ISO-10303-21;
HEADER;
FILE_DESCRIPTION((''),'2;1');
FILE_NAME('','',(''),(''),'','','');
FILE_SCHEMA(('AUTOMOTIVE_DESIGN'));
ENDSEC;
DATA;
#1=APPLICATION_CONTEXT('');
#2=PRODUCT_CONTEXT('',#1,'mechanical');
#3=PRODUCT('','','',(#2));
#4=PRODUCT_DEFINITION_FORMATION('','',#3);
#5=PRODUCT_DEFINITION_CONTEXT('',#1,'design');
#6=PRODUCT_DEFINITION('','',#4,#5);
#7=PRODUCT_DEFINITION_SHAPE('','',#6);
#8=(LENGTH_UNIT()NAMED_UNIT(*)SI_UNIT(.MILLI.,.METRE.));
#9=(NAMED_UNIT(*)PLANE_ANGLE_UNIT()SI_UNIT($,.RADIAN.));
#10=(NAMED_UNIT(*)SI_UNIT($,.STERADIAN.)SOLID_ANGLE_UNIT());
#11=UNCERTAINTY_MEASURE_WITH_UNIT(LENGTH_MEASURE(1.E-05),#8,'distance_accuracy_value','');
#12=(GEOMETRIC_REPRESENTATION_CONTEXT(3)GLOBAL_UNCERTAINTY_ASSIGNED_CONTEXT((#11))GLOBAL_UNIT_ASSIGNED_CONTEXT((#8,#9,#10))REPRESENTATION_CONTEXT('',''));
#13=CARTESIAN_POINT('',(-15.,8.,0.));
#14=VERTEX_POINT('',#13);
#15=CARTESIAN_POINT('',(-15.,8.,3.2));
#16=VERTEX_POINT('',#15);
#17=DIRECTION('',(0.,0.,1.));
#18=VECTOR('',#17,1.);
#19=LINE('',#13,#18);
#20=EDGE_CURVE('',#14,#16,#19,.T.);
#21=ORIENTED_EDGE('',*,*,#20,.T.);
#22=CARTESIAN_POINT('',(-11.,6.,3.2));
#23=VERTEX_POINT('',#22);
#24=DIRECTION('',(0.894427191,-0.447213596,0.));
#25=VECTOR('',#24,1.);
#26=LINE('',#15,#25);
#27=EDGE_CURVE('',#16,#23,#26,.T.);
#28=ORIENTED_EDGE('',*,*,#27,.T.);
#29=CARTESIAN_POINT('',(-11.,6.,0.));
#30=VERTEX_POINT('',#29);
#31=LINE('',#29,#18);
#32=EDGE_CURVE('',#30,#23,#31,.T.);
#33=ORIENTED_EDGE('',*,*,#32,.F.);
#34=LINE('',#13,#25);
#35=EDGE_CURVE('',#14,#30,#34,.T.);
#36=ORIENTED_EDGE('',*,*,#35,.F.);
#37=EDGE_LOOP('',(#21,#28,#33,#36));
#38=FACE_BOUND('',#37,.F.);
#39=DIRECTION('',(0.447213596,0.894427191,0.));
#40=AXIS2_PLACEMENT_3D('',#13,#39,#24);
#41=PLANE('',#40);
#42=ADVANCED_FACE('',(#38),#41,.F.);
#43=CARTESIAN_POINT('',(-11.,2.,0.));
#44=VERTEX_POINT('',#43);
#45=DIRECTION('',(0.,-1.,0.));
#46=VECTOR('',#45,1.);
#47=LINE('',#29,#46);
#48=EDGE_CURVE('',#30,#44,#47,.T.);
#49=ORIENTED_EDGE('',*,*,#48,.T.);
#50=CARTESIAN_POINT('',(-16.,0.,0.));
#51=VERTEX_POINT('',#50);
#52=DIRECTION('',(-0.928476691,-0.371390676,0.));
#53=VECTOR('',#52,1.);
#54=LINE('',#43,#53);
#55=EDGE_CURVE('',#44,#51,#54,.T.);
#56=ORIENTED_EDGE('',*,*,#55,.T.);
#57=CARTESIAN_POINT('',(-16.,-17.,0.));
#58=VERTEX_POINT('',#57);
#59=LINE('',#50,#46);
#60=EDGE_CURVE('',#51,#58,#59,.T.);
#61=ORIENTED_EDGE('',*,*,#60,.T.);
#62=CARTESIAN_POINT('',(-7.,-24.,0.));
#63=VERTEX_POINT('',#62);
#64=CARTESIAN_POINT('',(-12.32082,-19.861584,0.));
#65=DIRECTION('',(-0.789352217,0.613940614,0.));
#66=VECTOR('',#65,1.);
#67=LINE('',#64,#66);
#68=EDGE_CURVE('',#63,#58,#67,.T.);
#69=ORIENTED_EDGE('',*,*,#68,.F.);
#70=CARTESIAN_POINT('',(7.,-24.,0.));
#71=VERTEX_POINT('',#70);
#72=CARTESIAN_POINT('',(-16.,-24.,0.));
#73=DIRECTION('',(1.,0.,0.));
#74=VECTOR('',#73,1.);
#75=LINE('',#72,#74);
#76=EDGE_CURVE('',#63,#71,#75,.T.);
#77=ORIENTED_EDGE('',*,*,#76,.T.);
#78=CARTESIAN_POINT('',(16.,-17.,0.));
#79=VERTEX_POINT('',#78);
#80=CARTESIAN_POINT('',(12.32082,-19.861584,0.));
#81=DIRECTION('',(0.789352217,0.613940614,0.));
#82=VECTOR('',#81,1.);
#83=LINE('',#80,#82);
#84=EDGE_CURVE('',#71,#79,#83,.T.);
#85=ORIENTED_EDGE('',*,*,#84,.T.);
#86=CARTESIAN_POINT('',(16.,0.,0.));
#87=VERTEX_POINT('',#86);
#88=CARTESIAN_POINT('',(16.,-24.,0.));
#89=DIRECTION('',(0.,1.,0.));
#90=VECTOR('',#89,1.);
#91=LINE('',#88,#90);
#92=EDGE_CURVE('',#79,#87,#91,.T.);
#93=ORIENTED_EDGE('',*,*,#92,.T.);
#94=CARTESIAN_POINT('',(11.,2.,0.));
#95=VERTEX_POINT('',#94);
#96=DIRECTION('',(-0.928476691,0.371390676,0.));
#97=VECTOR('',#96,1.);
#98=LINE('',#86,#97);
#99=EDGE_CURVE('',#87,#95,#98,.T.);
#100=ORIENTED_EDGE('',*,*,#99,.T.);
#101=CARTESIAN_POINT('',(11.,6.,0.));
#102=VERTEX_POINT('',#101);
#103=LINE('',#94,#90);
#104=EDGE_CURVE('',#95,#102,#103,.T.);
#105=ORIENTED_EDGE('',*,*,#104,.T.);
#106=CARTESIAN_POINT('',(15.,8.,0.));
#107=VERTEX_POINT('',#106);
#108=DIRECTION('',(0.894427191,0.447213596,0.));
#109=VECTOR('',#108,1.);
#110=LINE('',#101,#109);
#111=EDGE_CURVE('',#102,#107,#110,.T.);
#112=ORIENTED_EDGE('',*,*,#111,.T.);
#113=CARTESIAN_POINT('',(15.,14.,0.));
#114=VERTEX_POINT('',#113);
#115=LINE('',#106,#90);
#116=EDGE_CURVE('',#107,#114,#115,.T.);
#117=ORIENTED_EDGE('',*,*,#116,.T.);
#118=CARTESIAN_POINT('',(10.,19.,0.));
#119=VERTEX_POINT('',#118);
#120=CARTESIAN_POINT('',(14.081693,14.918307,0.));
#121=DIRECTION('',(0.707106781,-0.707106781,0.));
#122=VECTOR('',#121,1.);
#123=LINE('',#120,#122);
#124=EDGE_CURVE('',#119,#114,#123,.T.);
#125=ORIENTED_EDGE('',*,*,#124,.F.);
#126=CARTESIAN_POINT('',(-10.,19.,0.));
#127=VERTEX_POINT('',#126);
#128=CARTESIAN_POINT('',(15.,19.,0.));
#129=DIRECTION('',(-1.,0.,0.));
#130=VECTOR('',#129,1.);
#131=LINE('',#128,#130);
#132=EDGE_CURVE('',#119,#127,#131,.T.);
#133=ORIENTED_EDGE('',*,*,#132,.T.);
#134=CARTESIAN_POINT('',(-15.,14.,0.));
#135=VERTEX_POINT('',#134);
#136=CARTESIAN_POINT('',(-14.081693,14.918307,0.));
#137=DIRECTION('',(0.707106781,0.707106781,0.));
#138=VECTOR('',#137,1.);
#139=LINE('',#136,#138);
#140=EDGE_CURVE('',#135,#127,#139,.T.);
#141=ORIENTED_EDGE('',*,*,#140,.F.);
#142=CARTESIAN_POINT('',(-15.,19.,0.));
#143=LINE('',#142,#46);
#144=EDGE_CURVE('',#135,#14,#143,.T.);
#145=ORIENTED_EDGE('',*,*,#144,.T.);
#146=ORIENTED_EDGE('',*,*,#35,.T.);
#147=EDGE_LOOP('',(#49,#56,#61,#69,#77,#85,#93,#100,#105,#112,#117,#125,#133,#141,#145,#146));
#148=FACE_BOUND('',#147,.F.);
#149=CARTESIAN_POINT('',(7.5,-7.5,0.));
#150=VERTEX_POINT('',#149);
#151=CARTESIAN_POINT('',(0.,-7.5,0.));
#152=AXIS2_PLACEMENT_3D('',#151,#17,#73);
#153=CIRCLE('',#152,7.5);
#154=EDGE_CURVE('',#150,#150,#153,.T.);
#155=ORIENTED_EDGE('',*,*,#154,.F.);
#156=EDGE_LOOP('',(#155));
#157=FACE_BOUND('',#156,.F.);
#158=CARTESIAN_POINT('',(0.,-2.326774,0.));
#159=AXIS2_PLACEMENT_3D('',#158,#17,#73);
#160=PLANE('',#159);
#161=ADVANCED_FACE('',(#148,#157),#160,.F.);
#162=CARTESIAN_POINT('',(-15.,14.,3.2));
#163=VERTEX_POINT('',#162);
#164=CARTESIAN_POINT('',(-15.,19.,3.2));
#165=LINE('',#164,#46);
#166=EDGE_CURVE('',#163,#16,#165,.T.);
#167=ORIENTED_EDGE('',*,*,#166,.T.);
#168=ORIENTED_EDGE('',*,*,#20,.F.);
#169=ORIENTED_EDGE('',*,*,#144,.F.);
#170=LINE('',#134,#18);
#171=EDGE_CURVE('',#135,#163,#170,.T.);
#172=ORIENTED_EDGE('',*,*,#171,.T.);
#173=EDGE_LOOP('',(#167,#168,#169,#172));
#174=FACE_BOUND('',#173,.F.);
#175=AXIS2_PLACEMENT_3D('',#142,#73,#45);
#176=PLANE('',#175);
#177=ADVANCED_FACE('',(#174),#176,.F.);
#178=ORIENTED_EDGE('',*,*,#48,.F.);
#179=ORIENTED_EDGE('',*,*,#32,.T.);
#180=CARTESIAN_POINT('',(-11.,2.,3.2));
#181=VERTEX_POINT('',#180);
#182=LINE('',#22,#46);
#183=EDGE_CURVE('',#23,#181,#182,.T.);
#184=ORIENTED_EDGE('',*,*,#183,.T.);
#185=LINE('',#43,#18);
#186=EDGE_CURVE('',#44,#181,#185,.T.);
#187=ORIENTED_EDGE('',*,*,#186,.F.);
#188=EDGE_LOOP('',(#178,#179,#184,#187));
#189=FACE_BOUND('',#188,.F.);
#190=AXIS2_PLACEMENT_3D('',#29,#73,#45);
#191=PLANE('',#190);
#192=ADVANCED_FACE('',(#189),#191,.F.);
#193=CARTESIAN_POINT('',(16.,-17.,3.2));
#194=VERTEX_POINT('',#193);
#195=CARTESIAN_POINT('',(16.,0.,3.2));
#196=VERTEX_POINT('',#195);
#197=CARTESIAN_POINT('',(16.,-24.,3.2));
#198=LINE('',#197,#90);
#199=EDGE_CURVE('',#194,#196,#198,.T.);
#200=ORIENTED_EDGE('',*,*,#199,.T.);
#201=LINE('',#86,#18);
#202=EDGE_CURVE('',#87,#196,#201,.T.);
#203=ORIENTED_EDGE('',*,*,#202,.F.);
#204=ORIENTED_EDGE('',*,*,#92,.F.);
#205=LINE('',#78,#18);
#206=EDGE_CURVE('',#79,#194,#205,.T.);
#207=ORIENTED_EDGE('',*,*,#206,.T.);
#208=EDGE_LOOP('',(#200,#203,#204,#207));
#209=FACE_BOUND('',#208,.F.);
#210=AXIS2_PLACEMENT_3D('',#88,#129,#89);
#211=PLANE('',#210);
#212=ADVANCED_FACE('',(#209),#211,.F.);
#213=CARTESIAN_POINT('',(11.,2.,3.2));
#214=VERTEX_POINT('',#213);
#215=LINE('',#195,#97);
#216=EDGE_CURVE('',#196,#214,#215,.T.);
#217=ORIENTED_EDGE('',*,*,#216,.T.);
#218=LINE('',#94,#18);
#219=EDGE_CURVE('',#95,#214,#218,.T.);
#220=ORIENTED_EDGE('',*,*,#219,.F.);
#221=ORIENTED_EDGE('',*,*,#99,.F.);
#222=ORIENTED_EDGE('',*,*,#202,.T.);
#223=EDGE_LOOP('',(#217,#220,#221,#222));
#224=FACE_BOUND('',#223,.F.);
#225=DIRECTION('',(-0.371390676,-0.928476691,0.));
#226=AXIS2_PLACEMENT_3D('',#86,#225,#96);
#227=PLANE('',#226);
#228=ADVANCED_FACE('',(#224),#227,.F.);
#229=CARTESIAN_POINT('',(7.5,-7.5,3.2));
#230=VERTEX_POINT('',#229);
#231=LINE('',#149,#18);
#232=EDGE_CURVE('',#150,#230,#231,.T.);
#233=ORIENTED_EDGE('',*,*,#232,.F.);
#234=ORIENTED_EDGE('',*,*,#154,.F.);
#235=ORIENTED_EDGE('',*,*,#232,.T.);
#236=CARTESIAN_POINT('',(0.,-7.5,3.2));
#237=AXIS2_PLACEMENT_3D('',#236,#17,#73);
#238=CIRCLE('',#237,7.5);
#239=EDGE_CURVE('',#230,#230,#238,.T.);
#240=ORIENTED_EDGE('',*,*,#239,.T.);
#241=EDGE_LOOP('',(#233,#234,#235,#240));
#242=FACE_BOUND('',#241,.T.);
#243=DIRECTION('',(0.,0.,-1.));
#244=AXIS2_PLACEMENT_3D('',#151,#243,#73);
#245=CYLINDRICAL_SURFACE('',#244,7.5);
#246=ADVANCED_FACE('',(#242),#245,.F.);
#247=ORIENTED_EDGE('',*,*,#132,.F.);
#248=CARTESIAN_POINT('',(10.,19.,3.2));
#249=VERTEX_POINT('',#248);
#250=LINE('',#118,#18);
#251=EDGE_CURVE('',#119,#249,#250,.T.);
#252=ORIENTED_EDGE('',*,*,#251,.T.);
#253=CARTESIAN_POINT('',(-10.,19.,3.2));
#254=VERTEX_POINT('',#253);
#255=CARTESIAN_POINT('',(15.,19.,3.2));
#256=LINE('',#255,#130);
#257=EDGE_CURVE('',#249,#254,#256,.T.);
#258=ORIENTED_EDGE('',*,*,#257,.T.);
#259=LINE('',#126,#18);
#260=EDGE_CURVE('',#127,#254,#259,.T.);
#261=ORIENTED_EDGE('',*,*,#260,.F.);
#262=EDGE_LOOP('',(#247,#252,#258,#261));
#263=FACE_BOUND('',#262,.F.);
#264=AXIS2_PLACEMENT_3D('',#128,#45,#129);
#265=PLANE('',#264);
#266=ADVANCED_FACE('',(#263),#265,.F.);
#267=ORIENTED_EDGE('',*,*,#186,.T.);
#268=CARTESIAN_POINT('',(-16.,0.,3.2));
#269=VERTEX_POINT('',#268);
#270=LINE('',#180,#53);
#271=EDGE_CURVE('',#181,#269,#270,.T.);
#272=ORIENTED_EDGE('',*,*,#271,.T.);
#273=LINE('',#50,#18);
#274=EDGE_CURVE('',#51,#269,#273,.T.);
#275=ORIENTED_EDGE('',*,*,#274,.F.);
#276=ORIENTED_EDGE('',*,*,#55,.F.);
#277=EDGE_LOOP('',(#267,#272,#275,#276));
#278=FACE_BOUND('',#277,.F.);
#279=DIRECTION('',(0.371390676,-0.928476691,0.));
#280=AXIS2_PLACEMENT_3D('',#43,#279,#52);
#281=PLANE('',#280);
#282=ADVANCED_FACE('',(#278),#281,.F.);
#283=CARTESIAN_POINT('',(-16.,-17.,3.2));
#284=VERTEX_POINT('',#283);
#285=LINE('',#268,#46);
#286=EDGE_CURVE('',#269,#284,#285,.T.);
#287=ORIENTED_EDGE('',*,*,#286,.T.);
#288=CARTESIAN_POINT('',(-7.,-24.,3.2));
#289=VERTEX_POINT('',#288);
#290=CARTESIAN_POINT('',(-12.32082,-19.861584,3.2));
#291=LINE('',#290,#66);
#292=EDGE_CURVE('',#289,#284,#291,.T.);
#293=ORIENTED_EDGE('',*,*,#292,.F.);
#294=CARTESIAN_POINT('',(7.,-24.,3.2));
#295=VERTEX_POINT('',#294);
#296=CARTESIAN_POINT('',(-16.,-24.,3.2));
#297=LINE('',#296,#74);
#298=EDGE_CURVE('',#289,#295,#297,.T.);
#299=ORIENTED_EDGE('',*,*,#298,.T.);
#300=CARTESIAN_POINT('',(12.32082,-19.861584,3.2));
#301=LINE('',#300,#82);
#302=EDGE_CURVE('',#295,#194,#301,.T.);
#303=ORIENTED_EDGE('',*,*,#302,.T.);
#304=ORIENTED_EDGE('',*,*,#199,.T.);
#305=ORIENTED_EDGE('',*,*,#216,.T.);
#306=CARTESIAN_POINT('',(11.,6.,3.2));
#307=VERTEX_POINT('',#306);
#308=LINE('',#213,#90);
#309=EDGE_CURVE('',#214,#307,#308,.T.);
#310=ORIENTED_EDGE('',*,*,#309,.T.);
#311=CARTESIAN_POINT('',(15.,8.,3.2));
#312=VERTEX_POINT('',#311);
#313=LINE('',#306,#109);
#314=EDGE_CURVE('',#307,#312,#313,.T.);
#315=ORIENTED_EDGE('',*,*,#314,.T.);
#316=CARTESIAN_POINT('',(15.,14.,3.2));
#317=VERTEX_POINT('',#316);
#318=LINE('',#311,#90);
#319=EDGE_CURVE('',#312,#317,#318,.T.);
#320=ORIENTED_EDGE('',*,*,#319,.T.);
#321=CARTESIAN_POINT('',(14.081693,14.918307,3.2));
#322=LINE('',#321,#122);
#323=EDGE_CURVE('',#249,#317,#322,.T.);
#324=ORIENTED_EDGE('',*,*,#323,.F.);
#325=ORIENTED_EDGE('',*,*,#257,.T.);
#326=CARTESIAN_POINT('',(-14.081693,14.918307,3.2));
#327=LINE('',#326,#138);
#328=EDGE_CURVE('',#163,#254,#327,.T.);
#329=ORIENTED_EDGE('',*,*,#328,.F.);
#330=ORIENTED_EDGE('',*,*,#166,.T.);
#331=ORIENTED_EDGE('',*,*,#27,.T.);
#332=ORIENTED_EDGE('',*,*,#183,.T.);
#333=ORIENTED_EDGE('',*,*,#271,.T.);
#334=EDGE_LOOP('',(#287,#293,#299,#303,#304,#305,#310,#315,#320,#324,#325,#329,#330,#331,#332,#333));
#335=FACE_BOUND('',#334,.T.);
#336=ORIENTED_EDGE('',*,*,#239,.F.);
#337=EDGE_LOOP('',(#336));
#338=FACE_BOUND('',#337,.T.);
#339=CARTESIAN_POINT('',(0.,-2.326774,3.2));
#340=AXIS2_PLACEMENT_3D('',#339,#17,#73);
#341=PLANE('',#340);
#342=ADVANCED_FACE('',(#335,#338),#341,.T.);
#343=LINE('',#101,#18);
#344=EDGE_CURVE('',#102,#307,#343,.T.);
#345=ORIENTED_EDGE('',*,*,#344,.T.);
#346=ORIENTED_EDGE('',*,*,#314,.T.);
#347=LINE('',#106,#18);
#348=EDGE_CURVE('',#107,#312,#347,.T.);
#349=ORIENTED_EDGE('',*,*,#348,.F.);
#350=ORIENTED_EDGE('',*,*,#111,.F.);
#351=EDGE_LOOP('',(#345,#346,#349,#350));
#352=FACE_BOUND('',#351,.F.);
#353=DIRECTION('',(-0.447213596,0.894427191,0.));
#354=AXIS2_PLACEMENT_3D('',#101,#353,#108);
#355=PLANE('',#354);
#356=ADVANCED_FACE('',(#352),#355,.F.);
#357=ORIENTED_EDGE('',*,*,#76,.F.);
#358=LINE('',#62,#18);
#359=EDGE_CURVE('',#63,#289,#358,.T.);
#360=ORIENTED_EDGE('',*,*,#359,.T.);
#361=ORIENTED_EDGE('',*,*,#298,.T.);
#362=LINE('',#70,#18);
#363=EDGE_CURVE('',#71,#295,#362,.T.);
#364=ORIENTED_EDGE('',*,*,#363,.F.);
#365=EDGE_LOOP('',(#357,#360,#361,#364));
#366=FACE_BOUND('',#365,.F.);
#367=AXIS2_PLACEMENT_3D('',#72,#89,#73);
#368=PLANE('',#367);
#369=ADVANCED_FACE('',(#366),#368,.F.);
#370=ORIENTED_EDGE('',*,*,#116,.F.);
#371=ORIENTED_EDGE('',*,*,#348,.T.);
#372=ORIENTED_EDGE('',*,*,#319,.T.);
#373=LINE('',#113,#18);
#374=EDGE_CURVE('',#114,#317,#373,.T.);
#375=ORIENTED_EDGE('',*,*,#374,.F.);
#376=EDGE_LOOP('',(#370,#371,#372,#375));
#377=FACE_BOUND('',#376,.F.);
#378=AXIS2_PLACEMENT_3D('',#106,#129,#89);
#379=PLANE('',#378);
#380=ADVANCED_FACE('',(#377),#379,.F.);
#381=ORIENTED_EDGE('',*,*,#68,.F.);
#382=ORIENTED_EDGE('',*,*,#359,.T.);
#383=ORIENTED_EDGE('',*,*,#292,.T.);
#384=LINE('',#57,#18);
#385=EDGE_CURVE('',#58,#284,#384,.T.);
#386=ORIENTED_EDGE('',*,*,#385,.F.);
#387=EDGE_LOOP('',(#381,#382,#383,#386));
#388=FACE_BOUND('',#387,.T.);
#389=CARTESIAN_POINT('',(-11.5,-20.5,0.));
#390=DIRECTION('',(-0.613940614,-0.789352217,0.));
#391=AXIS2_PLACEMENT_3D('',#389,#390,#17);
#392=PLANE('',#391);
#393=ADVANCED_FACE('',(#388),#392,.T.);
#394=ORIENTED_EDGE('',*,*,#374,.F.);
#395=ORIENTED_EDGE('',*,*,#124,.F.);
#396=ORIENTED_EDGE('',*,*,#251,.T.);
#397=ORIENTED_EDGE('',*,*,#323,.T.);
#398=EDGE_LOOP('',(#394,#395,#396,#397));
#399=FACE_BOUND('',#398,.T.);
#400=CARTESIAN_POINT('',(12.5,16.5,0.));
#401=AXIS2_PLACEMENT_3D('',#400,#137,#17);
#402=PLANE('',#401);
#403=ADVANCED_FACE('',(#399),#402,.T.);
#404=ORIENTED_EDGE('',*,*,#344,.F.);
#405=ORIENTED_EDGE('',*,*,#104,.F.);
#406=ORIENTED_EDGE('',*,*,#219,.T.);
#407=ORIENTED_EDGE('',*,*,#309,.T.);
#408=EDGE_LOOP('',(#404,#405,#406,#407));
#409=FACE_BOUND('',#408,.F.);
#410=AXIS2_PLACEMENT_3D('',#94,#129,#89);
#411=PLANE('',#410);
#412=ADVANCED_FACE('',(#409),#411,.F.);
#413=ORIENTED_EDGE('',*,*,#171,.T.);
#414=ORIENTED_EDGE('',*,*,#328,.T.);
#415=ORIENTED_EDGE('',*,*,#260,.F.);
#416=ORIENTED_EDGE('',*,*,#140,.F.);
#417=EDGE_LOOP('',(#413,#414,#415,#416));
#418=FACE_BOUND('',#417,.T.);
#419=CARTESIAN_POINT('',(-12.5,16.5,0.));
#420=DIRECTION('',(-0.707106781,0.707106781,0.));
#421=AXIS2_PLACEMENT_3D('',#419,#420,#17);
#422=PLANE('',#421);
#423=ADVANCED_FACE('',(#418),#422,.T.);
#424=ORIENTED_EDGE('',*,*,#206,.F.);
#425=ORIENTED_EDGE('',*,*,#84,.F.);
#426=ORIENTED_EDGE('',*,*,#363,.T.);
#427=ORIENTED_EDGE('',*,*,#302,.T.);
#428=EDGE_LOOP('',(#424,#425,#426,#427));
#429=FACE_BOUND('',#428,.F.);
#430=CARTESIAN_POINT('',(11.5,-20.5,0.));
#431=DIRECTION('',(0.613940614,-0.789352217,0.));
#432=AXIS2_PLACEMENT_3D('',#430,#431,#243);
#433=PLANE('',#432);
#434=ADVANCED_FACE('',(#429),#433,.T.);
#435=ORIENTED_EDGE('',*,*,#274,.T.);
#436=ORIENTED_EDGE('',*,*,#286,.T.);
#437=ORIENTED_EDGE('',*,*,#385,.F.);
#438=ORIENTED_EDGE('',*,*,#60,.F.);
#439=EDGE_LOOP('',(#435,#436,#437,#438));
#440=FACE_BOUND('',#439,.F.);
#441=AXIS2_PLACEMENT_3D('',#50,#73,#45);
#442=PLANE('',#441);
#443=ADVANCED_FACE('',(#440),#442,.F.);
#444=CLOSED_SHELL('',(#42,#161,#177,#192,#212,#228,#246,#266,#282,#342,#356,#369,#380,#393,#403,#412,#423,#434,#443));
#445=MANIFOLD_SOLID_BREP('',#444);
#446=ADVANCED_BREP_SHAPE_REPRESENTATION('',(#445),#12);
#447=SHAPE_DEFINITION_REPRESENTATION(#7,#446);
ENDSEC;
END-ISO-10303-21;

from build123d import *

# Parameters (mm, degrees)
F0_R     = 7.5
F1_DEPTH = 3.2
F2_SIZE2 = 7
F2_SIZE  = 9
F3_SIZE  = 5


with BuildPart() as f1:
    # F0 (on Top) → F1 (new body)
    with BuildSketch(Plane.XY):
        Polygon((-16, 0), (-16, -24), (16, -24), (16, 0), (11, 2), (11, 6), (15, 8), (15, 19), (-15, 19), (-15, 8), (-11, 6), (-11, 2), align=None)
        with Locations((0, -7.5)):
            Circle(F0_R, mode=Mode.SUBTRACT)
    extrude(amount=F1_DEPTH)

    # F2
    f2_edges = [f1.edges().sort_by_distance(p)[0] for p in [
        (-16, -24, 1.6),
        (16, -24, 1.6),
    ]]
    f2_side = f1.faces().sort_by_distance((0, -24, 1.6))[0]
    chamfer(f2_edges, length=F2_SIZE, length2=F2_SIZE2, reference=f2_side)

    # F3
    f3_edges = [f1.edges().sort_by_distance(p)[0] for p in [
        (-15, 19, 1.6),
        (15, 19, 1.6),
    ]]
    chamfer(f3_edges, length=F3_SIZE)


solid = f1.part
